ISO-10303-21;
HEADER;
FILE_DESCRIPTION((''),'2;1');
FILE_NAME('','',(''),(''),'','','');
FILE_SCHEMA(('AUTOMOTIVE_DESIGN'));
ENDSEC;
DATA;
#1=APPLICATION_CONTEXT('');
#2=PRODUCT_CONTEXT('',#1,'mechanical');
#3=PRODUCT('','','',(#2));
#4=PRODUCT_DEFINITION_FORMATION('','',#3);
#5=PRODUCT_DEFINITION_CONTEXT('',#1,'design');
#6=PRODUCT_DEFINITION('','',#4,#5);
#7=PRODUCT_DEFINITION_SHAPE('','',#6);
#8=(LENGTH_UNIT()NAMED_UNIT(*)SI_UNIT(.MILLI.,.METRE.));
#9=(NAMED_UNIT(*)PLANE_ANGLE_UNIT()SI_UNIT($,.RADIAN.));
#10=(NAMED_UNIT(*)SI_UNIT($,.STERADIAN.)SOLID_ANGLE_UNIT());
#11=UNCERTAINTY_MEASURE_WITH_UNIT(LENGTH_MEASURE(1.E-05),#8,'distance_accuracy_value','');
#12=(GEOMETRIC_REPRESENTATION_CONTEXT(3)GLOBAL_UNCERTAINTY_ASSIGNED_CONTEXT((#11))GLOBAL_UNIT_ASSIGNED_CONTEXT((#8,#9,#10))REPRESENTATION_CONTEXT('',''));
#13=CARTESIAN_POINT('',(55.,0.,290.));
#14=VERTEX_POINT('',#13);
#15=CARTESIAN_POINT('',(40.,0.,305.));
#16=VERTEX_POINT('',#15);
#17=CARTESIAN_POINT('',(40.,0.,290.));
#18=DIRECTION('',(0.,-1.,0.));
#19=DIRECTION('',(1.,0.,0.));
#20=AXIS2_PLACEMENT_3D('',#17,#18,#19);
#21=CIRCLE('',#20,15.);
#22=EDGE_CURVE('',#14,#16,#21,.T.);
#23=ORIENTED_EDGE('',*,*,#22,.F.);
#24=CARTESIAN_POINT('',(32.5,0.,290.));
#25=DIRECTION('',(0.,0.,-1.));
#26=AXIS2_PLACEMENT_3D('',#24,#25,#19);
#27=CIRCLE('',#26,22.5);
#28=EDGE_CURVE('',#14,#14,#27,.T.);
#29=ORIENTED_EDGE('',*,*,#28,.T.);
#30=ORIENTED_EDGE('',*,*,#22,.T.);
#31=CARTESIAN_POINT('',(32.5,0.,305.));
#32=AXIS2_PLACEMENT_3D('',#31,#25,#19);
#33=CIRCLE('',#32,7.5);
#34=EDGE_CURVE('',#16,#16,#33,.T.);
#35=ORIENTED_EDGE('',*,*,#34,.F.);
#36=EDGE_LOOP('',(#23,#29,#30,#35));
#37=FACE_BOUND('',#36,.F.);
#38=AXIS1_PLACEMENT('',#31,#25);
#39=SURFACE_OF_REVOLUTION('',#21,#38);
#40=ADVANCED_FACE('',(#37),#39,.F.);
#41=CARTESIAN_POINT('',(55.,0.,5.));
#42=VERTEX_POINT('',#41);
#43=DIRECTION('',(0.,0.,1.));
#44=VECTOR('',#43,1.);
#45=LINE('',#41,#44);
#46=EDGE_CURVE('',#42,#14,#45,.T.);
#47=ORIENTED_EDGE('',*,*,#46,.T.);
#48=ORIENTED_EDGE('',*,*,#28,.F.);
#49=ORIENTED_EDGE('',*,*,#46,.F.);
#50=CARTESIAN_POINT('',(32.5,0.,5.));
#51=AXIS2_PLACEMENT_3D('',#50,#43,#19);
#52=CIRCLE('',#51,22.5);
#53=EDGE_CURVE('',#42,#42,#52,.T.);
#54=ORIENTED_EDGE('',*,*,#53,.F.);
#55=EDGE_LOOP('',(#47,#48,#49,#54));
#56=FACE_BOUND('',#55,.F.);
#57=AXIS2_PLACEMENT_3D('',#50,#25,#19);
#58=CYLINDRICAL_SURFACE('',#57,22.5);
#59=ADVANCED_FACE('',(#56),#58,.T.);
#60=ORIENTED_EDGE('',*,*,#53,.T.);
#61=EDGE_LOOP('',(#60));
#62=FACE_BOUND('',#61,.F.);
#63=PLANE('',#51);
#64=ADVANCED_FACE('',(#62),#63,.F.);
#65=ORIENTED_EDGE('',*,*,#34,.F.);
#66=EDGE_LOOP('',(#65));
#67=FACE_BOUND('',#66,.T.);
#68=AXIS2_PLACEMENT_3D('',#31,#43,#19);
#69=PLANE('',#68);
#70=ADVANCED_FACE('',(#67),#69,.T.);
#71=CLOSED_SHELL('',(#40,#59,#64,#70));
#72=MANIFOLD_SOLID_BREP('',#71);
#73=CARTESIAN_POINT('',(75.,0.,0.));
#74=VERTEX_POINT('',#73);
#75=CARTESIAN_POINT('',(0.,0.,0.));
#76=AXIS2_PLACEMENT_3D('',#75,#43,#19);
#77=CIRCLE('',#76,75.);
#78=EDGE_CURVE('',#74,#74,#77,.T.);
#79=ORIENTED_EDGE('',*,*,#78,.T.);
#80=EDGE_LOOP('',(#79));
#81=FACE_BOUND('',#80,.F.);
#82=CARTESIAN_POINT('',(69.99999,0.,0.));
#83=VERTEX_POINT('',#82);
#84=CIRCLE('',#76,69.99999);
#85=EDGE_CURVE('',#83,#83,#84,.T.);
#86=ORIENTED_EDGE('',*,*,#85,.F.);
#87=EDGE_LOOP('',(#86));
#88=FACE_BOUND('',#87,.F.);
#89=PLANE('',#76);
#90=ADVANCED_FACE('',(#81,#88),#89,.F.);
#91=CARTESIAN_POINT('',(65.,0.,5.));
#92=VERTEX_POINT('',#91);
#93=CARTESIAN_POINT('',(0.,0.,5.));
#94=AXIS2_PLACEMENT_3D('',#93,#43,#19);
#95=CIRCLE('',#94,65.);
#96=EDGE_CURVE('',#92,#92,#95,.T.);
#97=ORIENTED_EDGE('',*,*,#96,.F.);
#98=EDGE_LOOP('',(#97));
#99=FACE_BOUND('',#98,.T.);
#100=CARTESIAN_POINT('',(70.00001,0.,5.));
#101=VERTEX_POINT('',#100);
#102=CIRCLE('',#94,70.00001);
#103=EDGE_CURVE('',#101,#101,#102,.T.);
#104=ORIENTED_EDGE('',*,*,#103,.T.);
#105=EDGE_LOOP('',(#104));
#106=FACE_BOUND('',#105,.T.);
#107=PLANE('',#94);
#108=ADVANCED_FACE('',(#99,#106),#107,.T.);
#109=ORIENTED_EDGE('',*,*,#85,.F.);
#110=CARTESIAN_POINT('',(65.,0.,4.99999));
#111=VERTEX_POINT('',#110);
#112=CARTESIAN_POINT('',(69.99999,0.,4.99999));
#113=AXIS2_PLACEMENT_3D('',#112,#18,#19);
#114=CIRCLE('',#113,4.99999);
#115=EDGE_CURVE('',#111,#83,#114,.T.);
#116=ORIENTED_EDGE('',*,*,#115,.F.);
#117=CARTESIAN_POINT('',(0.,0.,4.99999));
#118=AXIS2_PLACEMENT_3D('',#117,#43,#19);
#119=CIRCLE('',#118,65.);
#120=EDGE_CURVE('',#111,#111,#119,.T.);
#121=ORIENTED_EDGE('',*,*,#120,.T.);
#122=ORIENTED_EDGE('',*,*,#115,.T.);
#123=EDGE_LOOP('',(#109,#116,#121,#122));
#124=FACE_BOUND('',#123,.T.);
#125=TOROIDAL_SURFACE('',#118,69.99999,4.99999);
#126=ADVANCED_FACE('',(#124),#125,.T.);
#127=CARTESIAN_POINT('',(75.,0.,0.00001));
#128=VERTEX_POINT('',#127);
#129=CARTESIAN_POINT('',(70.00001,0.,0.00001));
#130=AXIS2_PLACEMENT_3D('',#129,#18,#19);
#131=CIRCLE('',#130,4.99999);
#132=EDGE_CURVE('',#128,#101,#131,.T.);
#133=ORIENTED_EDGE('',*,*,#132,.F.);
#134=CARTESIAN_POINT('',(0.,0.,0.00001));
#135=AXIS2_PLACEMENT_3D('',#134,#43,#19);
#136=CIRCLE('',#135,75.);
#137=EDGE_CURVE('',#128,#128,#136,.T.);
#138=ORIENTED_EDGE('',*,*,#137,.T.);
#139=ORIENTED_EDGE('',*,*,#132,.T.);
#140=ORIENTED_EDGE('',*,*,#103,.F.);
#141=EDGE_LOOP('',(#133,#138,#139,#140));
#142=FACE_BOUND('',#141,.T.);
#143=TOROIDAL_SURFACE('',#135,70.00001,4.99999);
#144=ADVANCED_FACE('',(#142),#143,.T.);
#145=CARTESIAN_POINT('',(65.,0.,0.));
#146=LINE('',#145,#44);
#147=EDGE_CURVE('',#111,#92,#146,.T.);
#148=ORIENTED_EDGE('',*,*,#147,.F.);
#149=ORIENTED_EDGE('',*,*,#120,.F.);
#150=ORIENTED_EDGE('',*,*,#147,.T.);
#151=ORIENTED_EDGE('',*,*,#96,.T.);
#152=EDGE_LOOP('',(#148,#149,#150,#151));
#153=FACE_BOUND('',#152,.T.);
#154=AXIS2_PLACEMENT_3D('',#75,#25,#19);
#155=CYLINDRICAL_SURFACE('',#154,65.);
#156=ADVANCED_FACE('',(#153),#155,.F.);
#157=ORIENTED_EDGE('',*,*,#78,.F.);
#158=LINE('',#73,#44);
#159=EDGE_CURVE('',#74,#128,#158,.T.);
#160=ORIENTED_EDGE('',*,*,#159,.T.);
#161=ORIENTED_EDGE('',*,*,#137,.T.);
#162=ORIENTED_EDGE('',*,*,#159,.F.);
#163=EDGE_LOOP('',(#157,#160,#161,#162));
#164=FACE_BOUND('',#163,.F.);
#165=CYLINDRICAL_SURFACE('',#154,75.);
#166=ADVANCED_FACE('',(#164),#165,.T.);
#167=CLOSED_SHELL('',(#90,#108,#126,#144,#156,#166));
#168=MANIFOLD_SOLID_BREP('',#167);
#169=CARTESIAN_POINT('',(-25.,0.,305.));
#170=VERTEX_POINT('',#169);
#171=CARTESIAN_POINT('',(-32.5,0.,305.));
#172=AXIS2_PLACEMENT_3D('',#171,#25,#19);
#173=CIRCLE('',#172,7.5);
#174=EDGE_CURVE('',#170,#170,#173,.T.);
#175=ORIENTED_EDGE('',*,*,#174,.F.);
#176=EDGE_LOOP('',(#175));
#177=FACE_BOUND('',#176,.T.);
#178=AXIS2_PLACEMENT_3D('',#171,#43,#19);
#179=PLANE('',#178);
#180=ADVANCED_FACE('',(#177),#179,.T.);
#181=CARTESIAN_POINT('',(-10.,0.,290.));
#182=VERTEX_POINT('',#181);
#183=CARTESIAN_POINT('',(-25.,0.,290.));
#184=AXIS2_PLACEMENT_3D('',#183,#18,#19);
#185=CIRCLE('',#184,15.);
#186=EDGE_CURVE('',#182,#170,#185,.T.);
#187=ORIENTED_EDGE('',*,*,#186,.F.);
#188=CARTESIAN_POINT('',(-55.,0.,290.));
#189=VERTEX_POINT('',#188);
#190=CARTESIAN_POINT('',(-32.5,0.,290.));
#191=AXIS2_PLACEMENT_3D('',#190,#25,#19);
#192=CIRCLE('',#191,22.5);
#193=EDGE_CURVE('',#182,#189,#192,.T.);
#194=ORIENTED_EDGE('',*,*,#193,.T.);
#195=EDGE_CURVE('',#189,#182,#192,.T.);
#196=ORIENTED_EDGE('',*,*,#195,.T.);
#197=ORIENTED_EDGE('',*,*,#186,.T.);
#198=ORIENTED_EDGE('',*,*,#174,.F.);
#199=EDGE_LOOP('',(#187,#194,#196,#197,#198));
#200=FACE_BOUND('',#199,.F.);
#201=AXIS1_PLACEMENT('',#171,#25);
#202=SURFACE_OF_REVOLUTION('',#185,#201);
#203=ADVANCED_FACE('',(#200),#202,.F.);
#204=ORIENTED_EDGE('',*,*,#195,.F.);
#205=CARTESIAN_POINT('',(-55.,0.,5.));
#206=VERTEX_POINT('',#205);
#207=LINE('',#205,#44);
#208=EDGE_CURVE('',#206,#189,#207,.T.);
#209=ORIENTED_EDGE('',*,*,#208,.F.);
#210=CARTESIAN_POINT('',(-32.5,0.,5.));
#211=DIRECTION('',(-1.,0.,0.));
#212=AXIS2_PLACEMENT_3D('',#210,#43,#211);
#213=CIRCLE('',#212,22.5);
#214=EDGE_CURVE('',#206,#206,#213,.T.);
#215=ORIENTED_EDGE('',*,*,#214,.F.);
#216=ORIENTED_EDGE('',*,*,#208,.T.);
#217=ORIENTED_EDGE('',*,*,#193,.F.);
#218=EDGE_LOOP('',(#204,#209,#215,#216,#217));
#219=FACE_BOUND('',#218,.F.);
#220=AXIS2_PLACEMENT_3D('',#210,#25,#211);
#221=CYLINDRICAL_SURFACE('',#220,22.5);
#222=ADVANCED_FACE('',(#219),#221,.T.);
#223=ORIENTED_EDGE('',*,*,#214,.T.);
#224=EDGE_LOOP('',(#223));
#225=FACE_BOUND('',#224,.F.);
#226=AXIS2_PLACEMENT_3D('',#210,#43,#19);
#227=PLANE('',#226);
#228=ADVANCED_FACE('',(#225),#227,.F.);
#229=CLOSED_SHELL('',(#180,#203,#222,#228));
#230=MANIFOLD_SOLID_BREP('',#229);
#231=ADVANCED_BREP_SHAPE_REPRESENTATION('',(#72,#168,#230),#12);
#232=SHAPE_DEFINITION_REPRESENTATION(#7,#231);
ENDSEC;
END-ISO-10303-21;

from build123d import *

# Parameters (mm, degrees)
F0_R     = 75
F0_R_2   = 65
F1_DEPTH = 5
F2_R     = 4.99999
F4_DEPTH = 300


# Not quite as in the source:
# - a fillet or chamfer that OpenCascade refuses, or shapes differently, is made with other operations: its cross-section is extruded or revolved along the edge and cut away or added
# - a fillet or chamfer is up to 0.001 mm smaller than in the source, because OpenCascade refuses the exact size


with BuildPart() as f1:
    # F0 (on Top) → F1 (new body)
    with BuildSketch(Plane.XY):
        Circle(F0_R)
        Circle(F0_R_2, mode=Mode.SUBTRACT)
    extrude(amount=F1_DEPTH)

    # F2 (radius 5 in the source; OpenCascade refuses exactly that, so slightly less here)
    f2_edges = [f1.edges().sort_by_distance(p)[0] for p in [
        (-75, 0, 5),
        (-65, 0, 0),
    ]]
    fillet(f2_edges, radius=F2_R)


with BuildPart() as f4:
    # F3 (on face) → F4 (new body)
    with BuildSketch(Plane.XY.offset(5)):
        with BuildLine():
            ThreePointArc((-10, 0), (-32.5, 22.5), (-55, 0))
            ThreePointArc((-55, 0), (-32.5, -22.5), (-10, 0))
        make_face()
    extrude(amount=F4_DEPTH)

    # F5: fillet of radius 15 on 1 edges, made by hand

    # F5_s1 → F5_t2 (revolve, cut)
    with BuildSketch(Plane.XZ):
        with BuildLine():
            ThreePointArc((-10, 290), (-14.3933982822, 300.6066017178), (-25, 305))
            Line((-25, 305), (-10, 305))
            Line((-10, 305), (-10, 290))
        make_face()
    revolve(axis=Axis((-32.5, 0, 305), (0, 0, -1)), mode=Mode.SUBTRACT)


with BuildPart() as f4b:
    # F3 (on face) → F4, piece 2 (new body)
    with BuildSketch(Plane.XY.offset(5)):
        with BuildLine():
            ThreePointArc((10, 0), (32.5, -22.5), (55, 0))
            ThreePointArc((55, 0), (32.5, 22.5), (10, 0))
        make_face()
    extrude(amount=F4_DEPTH)

    # F5#2: fillet of radius 15 on 1 edges, made by hand

    # F5_2_s1 → F5_2_t2 (revolve, cut)
    with BuildSketch(Plane.XZ):
        with BuildLine():
            ThreePointArc((55, 290), (50.6066017178, 300.6066017178), (40, 305))
            Line((40, 305), (55, 305))
            Line((55, 305), (55, 290))
        make_face()
    revolve(axis=Axis((32.5, 0, 305), (0, 0, -1)), mode=Mode.SUBTRACT)


solid = Compound([f1.part, f4.part, f4b.part])
